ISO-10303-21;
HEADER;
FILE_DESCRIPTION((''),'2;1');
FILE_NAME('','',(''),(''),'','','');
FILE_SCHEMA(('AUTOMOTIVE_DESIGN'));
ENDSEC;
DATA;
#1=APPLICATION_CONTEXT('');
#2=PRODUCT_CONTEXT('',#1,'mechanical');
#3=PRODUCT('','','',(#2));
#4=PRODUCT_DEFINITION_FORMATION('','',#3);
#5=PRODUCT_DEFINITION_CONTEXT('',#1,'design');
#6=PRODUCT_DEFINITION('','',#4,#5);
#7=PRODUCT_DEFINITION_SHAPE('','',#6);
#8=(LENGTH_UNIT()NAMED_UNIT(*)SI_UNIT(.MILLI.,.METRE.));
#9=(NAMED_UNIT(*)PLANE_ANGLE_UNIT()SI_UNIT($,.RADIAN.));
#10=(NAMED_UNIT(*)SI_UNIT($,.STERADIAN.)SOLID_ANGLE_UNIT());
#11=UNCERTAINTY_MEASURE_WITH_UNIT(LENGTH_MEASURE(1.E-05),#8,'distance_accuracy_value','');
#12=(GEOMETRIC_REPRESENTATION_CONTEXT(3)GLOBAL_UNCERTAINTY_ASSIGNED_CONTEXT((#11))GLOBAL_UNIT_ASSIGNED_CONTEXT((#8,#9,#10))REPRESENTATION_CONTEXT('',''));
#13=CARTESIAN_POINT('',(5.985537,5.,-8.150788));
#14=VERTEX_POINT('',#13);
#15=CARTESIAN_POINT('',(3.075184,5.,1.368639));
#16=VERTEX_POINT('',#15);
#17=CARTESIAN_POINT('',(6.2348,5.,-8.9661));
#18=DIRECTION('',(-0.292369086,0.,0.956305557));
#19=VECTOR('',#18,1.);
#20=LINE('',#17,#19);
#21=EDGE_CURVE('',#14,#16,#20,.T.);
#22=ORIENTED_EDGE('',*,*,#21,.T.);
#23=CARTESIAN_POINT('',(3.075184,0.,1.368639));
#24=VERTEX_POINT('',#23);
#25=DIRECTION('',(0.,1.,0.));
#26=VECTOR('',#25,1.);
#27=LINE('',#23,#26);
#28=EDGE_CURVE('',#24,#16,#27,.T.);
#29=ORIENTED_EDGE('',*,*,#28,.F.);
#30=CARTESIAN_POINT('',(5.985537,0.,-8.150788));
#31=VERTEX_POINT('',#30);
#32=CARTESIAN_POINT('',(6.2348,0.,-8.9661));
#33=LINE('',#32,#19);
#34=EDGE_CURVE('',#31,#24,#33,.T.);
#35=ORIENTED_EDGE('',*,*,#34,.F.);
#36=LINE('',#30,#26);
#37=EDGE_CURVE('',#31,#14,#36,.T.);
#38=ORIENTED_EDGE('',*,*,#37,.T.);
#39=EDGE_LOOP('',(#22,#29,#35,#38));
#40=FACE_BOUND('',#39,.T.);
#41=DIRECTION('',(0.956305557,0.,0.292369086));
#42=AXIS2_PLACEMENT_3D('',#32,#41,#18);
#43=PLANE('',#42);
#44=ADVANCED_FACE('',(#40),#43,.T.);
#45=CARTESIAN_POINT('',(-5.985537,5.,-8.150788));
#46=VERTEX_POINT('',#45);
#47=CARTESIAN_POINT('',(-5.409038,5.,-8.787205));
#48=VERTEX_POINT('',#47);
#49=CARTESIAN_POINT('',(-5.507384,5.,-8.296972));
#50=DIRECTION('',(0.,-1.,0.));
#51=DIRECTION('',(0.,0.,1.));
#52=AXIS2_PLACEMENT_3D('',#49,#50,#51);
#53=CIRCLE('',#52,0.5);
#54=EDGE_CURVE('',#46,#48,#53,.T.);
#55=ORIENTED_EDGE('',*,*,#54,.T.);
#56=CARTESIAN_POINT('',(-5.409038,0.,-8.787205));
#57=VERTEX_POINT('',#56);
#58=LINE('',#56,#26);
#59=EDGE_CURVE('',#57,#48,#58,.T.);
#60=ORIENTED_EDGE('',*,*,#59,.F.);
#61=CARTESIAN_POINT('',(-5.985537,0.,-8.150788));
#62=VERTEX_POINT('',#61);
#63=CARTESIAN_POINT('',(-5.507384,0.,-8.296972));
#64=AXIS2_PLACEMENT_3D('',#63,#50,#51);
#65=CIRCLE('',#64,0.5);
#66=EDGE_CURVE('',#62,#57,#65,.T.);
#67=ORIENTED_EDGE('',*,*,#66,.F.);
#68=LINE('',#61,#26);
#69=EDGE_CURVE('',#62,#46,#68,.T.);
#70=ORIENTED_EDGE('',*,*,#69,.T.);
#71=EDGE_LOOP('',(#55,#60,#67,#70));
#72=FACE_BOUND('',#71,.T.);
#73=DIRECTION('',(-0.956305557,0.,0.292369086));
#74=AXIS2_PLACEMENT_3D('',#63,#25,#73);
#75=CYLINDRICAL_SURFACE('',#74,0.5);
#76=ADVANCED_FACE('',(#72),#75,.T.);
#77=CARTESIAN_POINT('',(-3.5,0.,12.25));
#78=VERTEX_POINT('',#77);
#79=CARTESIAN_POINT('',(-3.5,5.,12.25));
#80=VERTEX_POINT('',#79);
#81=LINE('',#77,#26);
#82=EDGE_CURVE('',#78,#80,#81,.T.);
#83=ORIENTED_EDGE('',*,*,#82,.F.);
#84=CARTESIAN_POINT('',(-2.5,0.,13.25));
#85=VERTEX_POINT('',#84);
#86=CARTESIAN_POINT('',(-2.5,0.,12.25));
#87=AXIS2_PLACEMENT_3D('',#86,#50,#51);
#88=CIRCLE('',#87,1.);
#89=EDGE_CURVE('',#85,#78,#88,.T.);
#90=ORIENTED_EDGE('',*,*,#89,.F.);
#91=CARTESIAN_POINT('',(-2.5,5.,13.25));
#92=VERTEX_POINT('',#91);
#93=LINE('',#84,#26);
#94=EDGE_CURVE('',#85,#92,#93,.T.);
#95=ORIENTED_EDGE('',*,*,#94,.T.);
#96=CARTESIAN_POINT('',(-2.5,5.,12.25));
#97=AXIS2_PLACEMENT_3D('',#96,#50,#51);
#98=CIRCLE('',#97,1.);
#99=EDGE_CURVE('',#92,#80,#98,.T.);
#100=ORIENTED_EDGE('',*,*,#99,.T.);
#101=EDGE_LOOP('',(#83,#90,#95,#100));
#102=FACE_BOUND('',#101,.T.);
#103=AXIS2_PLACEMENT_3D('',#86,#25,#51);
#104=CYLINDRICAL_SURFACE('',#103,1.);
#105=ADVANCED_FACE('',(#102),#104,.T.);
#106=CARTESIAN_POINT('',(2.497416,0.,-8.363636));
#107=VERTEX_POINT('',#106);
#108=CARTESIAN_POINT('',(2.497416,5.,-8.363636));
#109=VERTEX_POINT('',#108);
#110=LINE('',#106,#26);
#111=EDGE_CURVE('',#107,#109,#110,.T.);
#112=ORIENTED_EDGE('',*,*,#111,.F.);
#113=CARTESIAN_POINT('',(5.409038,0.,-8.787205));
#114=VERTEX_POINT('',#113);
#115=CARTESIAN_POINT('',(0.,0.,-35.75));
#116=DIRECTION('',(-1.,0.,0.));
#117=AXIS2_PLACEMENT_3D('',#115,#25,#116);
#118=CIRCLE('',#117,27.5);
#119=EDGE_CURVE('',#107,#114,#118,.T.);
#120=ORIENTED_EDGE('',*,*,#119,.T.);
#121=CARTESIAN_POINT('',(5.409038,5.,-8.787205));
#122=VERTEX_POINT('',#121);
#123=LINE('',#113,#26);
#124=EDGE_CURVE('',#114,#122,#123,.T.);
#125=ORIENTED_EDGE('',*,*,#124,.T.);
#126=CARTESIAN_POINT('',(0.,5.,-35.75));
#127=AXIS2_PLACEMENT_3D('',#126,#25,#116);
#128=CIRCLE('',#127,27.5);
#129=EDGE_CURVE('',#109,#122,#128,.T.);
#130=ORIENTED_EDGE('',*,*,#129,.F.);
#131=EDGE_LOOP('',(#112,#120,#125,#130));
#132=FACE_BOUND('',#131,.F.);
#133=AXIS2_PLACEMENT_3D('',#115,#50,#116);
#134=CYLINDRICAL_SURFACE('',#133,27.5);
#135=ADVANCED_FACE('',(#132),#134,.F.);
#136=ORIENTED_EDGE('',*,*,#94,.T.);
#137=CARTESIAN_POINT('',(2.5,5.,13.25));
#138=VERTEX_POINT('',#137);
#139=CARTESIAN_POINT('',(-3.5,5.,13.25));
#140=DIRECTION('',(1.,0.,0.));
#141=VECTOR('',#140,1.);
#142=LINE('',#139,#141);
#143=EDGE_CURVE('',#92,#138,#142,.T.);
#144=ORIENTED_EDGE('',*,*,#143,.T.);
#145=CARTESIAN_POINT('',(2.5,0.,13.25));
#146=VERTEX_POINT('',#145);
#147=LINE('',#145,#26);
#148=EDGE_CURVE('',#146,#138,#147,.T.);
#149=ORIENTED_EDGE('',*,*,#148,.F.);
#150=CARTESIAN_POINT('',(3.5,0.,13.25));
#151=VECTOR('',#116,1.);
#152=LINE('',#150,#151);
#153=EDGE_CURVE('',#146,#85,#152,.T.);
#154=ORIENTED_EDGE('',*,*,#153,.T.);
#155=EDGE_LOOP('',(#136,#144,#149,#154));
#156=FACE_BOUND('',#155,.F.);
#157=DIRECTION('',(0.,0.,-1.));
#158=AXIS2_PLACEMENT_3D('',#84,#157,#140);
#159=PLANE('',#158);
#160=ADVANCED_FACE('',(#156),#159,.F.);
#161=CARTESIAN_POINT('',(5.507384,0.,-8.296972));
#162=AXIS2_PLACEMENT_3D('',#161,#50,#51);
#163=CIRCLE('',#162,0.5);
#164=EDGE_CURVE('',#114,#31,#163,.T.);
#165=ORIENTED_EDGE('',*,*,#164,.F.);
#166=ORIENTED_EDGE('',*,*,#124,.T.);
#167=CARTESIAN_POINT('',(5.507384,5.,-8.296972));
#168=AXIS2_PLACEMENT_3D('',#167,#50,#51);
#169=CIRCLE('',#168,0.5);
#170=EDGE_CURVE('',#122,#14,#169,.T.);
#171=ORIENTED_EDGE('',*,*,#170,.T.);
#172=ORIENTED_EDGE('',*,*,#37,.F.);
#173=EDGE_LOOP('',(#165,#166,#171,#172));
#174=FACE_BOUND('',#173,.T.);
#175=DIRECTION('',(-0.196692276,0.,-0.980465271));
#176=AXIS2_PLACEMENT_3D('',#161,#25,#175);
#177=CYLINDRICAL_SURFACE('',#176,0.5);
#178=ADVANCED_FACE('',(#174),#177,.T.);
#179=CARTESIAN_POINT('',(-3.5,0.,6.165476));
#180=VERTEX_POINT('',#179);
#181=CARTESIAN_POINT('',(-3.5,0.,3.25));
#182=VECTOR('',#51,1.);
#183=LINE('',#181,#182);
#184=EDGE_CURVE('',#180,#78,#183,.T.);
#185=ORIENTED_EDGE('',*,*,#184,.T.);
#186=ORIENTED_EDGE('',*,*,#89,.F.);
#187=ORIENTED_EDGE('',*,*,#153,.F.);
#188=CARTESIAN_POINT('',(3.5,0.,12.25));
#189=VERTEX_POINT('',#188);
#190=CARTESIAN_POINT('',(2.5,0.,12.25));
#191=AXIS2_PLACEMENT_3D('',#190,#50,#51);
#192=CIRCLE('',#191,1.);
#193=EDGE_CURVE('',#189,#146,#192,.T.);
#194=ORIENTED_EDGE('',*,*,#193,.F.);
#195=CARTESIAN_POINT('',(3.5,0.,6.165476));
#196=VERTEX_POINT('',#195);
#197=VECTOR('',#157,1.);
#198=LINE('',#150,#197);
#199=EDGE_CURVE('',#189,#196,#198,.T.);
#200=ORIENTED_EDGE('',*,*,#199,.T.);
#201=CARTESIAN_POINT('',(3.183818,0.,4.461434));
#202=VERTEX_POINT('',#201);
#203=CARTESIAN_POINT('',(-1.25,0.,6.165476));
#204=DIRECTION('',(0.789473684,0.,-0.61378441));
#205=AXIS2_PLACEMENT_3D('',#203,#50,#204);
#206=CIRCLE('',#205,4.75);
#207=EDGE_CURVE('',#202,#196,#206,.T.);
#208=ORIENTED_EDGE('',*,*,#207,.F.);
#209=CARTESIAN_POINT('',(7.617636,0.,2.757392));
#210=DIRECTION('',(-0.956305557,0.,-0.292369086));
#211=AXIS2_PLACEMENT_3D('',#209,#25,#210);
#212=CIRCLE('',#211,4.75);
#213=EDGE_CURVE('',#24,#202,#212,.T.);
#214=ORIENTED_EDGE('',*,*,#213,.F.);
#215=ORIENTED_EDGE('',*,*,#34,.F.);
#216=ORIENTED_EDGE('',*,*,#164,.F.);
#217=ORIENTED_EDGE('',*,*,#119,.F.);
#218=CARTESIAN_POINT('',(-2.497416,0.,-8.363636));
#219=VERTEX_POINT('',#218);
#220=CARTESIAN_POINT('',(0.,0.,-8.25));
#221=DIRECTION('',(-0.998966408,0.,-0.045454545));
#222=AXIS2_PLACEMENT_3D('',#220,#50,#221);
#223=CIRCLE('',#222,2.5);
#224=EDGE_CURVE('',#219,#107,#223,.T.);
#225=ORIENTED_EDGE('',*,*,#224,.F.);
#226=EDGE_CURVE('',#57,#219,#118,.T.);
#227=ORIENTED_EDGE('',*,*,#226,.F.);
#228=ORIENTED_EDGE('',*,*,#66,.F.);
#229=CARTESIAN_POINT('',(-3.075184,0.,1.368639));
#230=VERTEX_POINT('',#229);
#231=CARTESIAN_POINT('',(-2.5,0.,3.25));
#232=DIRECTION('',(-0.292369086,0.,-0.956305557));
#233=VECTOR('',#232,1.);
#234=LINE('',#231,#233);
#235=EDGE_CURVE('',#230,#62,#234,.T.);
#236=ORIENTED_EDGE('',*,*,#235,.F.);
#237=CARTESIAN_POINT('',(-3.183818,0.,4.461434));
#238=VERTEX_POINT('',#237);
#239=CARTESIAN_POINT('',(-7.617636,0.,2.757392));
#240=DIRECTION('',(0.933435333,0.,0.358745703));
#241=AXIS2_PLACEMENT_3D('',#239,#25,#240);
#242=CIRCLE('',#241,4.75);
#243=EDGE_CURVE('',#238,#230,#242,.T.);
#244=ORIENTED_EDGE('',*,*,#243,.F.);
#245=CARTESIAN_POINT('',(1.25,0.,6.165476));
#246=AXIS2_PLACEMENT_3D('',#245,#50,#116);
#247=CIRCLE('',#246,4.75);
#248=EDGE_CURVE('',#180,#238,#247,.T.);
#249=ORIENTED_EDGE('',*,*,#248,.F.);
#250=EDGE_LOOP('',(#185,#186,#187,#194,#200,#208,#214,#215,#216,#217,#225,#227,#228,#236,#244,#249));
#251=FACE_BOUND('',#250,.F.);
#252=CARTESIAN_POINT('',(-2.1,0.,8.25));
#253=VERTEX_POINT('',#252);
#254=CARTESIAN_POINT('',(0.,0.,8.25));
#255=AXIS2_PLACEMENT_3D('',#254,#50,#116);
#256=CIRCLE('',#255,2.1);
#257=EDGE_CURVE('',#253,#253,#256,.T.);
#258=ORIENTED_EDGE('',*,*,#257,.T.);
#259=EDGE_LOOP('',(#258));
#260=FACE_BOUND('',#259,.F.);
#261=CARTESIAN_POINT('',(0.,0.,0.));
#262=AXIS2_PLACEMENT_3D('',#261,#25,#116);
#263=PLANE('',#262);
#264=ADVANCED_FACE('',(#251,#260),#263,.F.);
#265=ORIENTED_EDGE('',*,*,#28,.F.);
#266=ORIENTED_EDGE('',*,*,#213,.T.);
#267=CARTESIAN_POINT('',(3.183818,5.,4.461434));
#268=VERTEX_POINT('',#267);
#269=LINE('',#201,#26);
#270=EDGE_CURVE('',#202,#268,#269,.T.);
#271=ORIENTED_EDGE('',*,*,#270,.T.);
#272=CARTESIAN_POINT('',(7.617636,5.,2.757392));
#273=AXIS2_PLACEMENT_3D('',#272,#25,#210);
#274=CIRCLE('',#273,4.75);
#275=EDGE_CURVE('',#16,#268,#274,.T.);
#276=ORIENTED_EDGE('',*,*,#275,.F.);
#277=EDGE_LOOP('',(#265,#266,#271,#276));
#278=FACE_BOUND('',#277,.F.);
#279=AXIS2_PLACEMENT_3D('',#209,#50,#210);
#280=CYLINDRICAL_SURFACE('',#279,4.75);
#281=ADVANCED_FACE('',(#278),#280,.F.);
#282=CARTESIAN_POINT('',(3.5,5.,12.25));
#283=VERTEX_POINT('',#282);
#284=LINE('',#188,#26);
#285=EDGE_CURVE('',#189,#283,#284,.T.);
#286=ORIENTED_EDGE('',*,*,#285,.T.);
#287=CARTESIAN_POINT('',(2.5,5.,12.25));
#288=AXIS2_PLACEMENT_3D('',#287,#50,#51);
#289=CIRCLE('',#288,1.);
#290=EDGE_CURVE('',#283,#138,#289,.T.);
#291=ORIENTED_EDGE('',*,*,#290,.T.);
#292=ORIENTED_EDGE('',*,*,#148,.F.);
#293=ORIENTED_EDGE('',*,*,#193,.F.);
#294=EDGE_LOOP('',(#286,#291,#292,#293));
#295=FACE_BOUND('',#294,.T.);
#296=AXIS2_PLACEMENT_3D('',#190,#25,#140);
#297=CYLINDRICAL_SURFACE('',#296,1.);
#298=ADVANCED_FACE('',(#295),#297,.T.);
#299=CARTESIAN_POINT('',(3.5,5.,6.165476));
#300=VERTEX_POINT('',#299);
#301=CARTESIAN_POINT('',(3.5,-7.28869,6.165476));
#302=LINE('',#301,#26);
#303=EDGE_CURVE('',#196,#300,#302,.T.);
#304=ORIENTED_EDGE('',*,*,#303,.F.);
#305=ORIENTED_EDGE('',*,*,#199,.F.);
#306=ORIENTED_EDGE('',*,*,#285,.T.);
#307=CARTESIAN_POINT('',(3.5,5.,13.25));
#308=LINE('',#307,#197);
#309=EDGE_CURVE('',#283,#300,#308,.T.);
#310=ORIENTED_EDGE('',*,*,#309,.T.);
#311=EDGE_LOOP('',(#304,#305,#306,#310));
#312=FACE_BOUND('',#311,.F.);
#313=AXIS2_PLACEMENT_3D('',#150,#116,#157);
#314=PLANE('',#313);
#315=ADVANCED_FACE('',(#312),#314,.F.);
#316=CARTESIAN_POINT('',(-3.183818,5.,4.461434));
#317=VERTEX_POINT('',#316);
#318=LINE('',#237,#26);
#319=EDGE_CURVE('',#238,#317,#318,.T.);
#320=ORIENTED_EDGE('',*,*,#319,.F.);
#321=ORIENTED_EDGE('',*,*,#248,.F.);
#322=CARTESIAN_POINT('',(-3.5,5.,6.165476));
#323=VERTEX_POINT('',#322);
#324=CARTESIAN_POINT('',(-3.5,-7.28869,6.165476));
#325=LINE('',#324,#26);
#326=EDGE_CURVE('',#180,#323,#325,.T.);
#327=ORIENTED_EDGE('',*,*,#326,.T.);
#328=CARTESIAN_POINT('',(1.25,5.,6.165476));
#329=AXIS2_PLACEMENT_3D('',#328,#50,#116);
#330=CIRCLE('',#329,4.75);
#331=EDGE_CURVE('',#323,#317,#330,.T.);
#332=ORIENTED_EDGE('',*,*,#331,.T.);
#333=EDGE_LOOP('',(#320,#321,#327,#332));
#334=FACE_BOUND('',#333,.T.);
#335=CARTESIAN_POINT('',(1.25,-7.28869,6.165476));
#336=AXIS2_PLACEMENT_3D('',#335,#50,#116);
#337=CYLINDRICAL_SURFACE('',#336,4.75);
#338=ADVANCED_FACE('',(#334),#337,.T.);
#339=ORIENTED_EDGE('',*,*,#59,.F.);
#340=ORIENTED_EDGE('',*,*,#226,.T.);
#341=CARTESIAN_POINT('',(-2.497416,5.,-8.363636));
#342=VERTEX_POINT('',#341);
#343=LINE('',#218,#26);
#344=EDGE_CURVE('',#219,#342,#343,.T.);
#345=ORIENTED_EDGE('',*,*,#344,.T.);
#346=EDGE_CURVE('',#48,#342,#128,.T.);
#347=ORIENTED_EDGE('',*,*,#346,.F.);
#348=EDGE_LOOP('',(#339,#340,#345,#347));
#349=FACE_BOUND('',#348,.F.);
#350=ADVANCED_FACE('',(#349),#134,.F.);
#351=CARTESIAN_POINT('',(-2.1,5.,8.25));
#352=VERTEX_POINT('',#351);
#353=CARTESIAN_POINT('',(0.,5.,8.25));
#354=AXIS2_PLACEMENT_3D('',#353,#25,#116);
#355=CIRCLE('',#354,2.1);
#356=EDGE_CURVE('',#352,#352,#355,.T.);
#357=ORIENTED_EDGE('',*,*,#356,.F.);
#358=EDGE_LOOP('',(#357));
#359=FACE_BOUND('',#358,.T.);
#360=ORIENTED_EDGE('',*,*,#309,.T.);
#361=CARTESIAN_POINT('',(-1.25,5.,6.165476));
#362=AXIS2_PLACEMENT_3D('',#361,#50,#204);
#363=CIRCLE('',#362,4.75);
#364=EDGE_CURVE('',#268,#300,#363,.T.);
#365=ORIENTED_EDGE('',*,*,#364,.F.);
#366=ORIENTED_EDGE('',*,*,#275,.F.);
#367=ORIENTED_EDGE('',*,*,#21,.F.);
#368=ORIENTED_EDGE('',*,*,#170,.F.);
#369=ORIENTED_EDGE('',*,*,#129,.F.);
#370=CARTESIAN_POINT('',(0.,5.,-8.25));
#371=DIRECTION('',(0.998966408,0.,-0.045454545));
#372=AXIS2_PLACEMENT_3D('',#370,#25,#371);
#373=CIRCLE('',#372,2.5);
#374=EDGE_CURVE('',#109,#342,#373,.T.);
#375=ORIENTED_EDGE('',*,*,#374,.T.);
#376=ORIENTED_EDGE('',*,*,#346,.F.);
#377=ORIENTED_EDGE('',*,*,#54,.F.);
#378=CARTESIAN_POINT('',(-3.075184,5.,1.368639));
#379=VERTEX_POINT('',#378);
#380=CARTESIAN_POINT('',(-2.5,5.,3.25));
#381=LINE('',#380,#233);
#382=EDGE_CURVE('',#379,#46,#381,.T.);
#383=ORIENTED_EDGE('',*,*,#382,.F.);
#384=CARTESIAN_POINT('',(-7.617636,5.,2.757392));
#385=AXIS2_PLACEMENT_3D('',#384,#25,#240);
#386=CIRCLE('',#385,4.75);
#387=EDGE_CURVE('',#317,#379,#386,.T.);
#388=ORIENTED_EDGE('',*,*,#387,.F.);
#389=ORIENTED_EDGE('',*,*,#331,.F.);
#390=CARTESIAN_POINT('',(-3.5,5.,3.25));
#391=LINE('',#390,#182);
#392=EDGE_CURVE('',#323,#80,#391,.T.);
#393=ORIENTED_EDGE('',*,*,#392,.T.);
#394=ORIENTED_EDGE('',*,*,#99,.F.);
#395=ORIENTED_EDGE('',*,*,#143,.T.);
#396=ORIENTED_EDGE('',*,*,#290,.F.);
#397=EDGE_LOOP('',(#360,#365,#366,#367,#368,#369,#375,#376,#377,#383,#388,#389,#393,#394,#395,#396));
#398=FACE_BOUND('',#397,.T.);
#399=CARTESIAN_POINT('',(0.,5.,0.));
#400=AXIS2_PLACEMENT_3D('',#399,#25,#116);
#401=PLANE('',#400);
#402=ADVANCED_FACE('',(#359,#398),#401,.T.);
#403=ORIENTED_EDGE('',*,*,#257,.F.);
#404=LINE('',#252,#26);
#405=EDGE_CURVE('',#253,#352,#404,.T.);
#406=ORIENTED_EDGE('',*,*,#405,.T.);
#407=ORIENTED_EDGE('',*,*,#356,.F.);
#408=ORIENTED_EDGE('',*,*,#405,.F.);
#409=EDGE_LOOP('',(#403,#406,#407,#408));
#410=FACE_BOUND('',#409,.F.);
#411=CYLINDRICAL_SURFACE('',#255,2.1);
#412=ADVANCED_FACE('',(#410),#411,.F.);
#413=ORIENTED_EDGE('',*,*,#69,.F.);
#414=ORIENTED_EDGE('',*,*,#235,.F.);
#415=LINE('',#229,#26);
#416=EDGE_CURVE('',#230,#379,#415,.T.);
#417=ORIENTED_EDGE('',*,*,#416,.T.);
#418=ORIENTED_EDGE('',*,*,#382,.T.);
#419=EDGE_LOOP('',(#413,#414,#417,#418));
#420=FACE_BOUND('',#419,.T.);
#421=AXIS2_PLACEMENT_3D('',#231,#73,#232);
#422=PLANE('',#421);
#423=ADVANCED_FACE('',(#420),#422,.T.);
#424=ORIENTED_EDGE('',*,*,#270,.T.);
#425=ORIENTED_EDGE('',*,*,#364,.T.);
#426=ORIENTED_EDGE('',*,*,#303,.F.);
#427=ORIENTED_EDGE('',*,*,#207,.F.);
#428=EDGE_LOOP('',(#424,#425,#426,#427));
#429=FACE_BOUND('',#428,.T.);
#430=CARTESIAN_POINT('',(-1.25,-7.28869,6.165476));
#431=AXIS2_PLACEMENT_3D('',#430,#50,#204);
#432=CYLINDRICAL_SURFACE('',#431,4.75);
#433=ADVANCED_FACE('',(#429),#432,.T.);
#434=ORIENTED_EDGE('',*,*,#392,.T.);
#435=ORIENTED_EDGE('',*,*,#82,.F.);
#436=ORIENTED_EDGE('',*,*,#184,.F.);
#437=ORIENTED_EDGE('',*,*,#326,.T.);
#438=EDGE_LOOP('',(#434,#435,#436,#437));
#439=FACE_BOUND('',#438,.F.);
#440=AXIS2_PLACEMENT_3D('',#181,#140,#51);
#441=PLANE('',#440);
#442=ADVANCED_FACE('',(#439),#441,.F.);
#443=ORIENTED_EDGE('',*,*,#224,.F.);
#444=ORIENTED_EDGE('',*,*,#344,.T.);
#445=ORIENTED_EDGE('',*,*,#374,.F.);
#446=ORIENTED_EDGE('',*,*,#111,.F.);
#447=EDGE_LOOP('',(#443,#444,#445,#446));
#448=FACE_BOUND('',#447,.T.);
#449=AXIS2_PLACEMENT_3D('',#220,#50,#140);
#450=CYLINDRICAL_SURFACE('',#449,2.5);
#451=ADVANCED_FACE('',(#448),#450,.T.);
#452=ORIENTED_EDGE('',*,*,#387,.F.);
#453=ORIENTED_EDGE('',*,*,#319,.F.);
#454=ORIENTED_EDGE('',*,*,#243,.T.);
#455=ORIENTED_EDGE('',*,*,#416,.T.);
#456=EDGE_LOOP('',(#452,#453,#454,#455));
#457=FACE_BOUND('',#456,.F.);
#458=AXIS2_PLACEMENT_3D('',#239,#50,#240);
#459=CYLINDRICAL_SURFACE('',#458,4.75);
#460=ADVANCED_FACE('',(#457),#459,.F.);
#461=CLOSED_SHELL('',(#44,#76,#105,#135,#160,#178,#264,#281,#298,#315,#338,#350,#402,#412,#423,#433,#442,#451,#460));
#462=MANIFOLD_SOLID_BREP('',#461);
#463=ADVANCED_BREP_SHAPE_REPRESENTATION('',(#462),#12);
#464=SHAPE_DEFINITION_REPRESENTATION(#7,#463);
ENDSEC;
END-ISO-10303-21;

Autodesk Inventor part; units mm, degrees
ref_plane "YZ Plane" through (0, 0, 0) normal (1, 0, 0) x (0, 1, 0)
ref_plane "XZ Plane" through (0, 0, 0) normal (0, 1, 0) x (-1, 0, 0)
ref_plane "XY Plane" through (0, 0, 0) normal (0, 0, 1) x (1, 0, 0)
sketch "Sketch1" plane through (0, 0, 0) normal (0, 1, 0) x (-1, 0, 0)
  line L0 (0, 8.25) -> (0, -8.25) construction
  line L1 (-2.5, 8.25) -> (-2.5, -8.25)
  line L2 (2.5, -8.25) -> (2.5, 8.25)
  arc A0 (2.5, 8.25) -> (-2.5, 8.25) centre (0, 8.25) ccw
  arc A1 (-2.5, -8.25) -> (2.5, -8.25) centre (0, -8.25) ccw
  circle A2 centre (0, 8.25) radius 2.1
  circle A3 centre (0, -8.25) radius 2.1
  line L3 (2.5, 13.25) -> (-2.5, 13.25)
  line L4 (-2.5, 13.25) -> (-2.5, 3.25)
  line L5 (-2.5, 3.25) -> (2.5, 3.25)
  line L6 (2.5, 3.25) -> (2.5, 13.25)
  line L7 (2.5, 13.25) -> (-2.5, 3.25) construction
  line L8 (-2.5, 13.25) -> (2.5, 3.25) construction
  line L9 (0, 8.25) -> (0, -35.75)
  circle A4 centre (0, -35.75) radius 27.5
  line L10 (-6.2348, -8.9661) -> (-2.5, 3.25)
  line L11 (2.5, 3.25) -> (6.2348, -8.9661)
  line L12 (3.5, 13.25) -> (-3.5, 13.25)
  line L13 (-3.5, 13.25) -> (-3.5, 3.25)
  line L14 (-3.5, 3.25) -> (3.5, 3.25)
  line L15 (3.5, 3.25) -> (3.5, 13.25)
  line L16 (3.5, 13.25) -> (-3.5, 3.25) construction
  line L17 (-3.5, 13.25) -> (3.5, 3.25) construction
  point P0 (0, 0)
  point P1 (-2.5, 8.25)
  point P2 (2.5, 8.25)
  point P3 (2.5, 3.25)
  point P4 (2.4974, -8.3636)
  point P5 (-2.4974, -8.3636)
  point P6 (2.5, 3.25)
  point P7 (-2.5, 3.25)
  point P8 (-2.5, 13.25)
  dimension "d1" = 2.5
  dimension "d2" = 4.2
  dimension "d6" = 10
  dimension "d7" = 16.5
  dimension "d8" = 44
  dimension "d9" = 17
  dimension "d12" = 10
  dimension "d13" = 7
extrude "Extrusion1" add sketch "Sketch1" along normal blind 5 contours A0 L2 L5 L1 | L4 L3 L6 A0 | L1 L14 L13 L12 L4 | L5 L9 A3 A4 A1 L1 | L1 A1 A4 L10 | L6 L12 L15 L14 L2 | L5 L2 A1 A4 A3 L9 | L11 A4 A1 L2 | A4 A3 L9 A1 | L9 A4 A3 | A3 A4 L9 | L9 A3 A4 A1 | A4 L9 A3 | A4 A3 L9
fillet "Fillet2" radius 0.5 2 edges at (6.2348, 2.5, -8.9661) (-6.2348, 2.5, -8.9661)
fillet "Fillet4" radius 4.75 4 edges at (3.5, 2.5, 3.25) (2.5, 2.5, 3.25) (-3.5, 2.5, 3.25) (-2.5, 2.5, 3.25)
fillet "Fillet5" radius 1 2 edges at (-3.5, 2.5, 13.25) (3.5, 2.5, 13.25)
equation "\"d12\" = d6"
properties part number "11_Chot_banh_lai"
